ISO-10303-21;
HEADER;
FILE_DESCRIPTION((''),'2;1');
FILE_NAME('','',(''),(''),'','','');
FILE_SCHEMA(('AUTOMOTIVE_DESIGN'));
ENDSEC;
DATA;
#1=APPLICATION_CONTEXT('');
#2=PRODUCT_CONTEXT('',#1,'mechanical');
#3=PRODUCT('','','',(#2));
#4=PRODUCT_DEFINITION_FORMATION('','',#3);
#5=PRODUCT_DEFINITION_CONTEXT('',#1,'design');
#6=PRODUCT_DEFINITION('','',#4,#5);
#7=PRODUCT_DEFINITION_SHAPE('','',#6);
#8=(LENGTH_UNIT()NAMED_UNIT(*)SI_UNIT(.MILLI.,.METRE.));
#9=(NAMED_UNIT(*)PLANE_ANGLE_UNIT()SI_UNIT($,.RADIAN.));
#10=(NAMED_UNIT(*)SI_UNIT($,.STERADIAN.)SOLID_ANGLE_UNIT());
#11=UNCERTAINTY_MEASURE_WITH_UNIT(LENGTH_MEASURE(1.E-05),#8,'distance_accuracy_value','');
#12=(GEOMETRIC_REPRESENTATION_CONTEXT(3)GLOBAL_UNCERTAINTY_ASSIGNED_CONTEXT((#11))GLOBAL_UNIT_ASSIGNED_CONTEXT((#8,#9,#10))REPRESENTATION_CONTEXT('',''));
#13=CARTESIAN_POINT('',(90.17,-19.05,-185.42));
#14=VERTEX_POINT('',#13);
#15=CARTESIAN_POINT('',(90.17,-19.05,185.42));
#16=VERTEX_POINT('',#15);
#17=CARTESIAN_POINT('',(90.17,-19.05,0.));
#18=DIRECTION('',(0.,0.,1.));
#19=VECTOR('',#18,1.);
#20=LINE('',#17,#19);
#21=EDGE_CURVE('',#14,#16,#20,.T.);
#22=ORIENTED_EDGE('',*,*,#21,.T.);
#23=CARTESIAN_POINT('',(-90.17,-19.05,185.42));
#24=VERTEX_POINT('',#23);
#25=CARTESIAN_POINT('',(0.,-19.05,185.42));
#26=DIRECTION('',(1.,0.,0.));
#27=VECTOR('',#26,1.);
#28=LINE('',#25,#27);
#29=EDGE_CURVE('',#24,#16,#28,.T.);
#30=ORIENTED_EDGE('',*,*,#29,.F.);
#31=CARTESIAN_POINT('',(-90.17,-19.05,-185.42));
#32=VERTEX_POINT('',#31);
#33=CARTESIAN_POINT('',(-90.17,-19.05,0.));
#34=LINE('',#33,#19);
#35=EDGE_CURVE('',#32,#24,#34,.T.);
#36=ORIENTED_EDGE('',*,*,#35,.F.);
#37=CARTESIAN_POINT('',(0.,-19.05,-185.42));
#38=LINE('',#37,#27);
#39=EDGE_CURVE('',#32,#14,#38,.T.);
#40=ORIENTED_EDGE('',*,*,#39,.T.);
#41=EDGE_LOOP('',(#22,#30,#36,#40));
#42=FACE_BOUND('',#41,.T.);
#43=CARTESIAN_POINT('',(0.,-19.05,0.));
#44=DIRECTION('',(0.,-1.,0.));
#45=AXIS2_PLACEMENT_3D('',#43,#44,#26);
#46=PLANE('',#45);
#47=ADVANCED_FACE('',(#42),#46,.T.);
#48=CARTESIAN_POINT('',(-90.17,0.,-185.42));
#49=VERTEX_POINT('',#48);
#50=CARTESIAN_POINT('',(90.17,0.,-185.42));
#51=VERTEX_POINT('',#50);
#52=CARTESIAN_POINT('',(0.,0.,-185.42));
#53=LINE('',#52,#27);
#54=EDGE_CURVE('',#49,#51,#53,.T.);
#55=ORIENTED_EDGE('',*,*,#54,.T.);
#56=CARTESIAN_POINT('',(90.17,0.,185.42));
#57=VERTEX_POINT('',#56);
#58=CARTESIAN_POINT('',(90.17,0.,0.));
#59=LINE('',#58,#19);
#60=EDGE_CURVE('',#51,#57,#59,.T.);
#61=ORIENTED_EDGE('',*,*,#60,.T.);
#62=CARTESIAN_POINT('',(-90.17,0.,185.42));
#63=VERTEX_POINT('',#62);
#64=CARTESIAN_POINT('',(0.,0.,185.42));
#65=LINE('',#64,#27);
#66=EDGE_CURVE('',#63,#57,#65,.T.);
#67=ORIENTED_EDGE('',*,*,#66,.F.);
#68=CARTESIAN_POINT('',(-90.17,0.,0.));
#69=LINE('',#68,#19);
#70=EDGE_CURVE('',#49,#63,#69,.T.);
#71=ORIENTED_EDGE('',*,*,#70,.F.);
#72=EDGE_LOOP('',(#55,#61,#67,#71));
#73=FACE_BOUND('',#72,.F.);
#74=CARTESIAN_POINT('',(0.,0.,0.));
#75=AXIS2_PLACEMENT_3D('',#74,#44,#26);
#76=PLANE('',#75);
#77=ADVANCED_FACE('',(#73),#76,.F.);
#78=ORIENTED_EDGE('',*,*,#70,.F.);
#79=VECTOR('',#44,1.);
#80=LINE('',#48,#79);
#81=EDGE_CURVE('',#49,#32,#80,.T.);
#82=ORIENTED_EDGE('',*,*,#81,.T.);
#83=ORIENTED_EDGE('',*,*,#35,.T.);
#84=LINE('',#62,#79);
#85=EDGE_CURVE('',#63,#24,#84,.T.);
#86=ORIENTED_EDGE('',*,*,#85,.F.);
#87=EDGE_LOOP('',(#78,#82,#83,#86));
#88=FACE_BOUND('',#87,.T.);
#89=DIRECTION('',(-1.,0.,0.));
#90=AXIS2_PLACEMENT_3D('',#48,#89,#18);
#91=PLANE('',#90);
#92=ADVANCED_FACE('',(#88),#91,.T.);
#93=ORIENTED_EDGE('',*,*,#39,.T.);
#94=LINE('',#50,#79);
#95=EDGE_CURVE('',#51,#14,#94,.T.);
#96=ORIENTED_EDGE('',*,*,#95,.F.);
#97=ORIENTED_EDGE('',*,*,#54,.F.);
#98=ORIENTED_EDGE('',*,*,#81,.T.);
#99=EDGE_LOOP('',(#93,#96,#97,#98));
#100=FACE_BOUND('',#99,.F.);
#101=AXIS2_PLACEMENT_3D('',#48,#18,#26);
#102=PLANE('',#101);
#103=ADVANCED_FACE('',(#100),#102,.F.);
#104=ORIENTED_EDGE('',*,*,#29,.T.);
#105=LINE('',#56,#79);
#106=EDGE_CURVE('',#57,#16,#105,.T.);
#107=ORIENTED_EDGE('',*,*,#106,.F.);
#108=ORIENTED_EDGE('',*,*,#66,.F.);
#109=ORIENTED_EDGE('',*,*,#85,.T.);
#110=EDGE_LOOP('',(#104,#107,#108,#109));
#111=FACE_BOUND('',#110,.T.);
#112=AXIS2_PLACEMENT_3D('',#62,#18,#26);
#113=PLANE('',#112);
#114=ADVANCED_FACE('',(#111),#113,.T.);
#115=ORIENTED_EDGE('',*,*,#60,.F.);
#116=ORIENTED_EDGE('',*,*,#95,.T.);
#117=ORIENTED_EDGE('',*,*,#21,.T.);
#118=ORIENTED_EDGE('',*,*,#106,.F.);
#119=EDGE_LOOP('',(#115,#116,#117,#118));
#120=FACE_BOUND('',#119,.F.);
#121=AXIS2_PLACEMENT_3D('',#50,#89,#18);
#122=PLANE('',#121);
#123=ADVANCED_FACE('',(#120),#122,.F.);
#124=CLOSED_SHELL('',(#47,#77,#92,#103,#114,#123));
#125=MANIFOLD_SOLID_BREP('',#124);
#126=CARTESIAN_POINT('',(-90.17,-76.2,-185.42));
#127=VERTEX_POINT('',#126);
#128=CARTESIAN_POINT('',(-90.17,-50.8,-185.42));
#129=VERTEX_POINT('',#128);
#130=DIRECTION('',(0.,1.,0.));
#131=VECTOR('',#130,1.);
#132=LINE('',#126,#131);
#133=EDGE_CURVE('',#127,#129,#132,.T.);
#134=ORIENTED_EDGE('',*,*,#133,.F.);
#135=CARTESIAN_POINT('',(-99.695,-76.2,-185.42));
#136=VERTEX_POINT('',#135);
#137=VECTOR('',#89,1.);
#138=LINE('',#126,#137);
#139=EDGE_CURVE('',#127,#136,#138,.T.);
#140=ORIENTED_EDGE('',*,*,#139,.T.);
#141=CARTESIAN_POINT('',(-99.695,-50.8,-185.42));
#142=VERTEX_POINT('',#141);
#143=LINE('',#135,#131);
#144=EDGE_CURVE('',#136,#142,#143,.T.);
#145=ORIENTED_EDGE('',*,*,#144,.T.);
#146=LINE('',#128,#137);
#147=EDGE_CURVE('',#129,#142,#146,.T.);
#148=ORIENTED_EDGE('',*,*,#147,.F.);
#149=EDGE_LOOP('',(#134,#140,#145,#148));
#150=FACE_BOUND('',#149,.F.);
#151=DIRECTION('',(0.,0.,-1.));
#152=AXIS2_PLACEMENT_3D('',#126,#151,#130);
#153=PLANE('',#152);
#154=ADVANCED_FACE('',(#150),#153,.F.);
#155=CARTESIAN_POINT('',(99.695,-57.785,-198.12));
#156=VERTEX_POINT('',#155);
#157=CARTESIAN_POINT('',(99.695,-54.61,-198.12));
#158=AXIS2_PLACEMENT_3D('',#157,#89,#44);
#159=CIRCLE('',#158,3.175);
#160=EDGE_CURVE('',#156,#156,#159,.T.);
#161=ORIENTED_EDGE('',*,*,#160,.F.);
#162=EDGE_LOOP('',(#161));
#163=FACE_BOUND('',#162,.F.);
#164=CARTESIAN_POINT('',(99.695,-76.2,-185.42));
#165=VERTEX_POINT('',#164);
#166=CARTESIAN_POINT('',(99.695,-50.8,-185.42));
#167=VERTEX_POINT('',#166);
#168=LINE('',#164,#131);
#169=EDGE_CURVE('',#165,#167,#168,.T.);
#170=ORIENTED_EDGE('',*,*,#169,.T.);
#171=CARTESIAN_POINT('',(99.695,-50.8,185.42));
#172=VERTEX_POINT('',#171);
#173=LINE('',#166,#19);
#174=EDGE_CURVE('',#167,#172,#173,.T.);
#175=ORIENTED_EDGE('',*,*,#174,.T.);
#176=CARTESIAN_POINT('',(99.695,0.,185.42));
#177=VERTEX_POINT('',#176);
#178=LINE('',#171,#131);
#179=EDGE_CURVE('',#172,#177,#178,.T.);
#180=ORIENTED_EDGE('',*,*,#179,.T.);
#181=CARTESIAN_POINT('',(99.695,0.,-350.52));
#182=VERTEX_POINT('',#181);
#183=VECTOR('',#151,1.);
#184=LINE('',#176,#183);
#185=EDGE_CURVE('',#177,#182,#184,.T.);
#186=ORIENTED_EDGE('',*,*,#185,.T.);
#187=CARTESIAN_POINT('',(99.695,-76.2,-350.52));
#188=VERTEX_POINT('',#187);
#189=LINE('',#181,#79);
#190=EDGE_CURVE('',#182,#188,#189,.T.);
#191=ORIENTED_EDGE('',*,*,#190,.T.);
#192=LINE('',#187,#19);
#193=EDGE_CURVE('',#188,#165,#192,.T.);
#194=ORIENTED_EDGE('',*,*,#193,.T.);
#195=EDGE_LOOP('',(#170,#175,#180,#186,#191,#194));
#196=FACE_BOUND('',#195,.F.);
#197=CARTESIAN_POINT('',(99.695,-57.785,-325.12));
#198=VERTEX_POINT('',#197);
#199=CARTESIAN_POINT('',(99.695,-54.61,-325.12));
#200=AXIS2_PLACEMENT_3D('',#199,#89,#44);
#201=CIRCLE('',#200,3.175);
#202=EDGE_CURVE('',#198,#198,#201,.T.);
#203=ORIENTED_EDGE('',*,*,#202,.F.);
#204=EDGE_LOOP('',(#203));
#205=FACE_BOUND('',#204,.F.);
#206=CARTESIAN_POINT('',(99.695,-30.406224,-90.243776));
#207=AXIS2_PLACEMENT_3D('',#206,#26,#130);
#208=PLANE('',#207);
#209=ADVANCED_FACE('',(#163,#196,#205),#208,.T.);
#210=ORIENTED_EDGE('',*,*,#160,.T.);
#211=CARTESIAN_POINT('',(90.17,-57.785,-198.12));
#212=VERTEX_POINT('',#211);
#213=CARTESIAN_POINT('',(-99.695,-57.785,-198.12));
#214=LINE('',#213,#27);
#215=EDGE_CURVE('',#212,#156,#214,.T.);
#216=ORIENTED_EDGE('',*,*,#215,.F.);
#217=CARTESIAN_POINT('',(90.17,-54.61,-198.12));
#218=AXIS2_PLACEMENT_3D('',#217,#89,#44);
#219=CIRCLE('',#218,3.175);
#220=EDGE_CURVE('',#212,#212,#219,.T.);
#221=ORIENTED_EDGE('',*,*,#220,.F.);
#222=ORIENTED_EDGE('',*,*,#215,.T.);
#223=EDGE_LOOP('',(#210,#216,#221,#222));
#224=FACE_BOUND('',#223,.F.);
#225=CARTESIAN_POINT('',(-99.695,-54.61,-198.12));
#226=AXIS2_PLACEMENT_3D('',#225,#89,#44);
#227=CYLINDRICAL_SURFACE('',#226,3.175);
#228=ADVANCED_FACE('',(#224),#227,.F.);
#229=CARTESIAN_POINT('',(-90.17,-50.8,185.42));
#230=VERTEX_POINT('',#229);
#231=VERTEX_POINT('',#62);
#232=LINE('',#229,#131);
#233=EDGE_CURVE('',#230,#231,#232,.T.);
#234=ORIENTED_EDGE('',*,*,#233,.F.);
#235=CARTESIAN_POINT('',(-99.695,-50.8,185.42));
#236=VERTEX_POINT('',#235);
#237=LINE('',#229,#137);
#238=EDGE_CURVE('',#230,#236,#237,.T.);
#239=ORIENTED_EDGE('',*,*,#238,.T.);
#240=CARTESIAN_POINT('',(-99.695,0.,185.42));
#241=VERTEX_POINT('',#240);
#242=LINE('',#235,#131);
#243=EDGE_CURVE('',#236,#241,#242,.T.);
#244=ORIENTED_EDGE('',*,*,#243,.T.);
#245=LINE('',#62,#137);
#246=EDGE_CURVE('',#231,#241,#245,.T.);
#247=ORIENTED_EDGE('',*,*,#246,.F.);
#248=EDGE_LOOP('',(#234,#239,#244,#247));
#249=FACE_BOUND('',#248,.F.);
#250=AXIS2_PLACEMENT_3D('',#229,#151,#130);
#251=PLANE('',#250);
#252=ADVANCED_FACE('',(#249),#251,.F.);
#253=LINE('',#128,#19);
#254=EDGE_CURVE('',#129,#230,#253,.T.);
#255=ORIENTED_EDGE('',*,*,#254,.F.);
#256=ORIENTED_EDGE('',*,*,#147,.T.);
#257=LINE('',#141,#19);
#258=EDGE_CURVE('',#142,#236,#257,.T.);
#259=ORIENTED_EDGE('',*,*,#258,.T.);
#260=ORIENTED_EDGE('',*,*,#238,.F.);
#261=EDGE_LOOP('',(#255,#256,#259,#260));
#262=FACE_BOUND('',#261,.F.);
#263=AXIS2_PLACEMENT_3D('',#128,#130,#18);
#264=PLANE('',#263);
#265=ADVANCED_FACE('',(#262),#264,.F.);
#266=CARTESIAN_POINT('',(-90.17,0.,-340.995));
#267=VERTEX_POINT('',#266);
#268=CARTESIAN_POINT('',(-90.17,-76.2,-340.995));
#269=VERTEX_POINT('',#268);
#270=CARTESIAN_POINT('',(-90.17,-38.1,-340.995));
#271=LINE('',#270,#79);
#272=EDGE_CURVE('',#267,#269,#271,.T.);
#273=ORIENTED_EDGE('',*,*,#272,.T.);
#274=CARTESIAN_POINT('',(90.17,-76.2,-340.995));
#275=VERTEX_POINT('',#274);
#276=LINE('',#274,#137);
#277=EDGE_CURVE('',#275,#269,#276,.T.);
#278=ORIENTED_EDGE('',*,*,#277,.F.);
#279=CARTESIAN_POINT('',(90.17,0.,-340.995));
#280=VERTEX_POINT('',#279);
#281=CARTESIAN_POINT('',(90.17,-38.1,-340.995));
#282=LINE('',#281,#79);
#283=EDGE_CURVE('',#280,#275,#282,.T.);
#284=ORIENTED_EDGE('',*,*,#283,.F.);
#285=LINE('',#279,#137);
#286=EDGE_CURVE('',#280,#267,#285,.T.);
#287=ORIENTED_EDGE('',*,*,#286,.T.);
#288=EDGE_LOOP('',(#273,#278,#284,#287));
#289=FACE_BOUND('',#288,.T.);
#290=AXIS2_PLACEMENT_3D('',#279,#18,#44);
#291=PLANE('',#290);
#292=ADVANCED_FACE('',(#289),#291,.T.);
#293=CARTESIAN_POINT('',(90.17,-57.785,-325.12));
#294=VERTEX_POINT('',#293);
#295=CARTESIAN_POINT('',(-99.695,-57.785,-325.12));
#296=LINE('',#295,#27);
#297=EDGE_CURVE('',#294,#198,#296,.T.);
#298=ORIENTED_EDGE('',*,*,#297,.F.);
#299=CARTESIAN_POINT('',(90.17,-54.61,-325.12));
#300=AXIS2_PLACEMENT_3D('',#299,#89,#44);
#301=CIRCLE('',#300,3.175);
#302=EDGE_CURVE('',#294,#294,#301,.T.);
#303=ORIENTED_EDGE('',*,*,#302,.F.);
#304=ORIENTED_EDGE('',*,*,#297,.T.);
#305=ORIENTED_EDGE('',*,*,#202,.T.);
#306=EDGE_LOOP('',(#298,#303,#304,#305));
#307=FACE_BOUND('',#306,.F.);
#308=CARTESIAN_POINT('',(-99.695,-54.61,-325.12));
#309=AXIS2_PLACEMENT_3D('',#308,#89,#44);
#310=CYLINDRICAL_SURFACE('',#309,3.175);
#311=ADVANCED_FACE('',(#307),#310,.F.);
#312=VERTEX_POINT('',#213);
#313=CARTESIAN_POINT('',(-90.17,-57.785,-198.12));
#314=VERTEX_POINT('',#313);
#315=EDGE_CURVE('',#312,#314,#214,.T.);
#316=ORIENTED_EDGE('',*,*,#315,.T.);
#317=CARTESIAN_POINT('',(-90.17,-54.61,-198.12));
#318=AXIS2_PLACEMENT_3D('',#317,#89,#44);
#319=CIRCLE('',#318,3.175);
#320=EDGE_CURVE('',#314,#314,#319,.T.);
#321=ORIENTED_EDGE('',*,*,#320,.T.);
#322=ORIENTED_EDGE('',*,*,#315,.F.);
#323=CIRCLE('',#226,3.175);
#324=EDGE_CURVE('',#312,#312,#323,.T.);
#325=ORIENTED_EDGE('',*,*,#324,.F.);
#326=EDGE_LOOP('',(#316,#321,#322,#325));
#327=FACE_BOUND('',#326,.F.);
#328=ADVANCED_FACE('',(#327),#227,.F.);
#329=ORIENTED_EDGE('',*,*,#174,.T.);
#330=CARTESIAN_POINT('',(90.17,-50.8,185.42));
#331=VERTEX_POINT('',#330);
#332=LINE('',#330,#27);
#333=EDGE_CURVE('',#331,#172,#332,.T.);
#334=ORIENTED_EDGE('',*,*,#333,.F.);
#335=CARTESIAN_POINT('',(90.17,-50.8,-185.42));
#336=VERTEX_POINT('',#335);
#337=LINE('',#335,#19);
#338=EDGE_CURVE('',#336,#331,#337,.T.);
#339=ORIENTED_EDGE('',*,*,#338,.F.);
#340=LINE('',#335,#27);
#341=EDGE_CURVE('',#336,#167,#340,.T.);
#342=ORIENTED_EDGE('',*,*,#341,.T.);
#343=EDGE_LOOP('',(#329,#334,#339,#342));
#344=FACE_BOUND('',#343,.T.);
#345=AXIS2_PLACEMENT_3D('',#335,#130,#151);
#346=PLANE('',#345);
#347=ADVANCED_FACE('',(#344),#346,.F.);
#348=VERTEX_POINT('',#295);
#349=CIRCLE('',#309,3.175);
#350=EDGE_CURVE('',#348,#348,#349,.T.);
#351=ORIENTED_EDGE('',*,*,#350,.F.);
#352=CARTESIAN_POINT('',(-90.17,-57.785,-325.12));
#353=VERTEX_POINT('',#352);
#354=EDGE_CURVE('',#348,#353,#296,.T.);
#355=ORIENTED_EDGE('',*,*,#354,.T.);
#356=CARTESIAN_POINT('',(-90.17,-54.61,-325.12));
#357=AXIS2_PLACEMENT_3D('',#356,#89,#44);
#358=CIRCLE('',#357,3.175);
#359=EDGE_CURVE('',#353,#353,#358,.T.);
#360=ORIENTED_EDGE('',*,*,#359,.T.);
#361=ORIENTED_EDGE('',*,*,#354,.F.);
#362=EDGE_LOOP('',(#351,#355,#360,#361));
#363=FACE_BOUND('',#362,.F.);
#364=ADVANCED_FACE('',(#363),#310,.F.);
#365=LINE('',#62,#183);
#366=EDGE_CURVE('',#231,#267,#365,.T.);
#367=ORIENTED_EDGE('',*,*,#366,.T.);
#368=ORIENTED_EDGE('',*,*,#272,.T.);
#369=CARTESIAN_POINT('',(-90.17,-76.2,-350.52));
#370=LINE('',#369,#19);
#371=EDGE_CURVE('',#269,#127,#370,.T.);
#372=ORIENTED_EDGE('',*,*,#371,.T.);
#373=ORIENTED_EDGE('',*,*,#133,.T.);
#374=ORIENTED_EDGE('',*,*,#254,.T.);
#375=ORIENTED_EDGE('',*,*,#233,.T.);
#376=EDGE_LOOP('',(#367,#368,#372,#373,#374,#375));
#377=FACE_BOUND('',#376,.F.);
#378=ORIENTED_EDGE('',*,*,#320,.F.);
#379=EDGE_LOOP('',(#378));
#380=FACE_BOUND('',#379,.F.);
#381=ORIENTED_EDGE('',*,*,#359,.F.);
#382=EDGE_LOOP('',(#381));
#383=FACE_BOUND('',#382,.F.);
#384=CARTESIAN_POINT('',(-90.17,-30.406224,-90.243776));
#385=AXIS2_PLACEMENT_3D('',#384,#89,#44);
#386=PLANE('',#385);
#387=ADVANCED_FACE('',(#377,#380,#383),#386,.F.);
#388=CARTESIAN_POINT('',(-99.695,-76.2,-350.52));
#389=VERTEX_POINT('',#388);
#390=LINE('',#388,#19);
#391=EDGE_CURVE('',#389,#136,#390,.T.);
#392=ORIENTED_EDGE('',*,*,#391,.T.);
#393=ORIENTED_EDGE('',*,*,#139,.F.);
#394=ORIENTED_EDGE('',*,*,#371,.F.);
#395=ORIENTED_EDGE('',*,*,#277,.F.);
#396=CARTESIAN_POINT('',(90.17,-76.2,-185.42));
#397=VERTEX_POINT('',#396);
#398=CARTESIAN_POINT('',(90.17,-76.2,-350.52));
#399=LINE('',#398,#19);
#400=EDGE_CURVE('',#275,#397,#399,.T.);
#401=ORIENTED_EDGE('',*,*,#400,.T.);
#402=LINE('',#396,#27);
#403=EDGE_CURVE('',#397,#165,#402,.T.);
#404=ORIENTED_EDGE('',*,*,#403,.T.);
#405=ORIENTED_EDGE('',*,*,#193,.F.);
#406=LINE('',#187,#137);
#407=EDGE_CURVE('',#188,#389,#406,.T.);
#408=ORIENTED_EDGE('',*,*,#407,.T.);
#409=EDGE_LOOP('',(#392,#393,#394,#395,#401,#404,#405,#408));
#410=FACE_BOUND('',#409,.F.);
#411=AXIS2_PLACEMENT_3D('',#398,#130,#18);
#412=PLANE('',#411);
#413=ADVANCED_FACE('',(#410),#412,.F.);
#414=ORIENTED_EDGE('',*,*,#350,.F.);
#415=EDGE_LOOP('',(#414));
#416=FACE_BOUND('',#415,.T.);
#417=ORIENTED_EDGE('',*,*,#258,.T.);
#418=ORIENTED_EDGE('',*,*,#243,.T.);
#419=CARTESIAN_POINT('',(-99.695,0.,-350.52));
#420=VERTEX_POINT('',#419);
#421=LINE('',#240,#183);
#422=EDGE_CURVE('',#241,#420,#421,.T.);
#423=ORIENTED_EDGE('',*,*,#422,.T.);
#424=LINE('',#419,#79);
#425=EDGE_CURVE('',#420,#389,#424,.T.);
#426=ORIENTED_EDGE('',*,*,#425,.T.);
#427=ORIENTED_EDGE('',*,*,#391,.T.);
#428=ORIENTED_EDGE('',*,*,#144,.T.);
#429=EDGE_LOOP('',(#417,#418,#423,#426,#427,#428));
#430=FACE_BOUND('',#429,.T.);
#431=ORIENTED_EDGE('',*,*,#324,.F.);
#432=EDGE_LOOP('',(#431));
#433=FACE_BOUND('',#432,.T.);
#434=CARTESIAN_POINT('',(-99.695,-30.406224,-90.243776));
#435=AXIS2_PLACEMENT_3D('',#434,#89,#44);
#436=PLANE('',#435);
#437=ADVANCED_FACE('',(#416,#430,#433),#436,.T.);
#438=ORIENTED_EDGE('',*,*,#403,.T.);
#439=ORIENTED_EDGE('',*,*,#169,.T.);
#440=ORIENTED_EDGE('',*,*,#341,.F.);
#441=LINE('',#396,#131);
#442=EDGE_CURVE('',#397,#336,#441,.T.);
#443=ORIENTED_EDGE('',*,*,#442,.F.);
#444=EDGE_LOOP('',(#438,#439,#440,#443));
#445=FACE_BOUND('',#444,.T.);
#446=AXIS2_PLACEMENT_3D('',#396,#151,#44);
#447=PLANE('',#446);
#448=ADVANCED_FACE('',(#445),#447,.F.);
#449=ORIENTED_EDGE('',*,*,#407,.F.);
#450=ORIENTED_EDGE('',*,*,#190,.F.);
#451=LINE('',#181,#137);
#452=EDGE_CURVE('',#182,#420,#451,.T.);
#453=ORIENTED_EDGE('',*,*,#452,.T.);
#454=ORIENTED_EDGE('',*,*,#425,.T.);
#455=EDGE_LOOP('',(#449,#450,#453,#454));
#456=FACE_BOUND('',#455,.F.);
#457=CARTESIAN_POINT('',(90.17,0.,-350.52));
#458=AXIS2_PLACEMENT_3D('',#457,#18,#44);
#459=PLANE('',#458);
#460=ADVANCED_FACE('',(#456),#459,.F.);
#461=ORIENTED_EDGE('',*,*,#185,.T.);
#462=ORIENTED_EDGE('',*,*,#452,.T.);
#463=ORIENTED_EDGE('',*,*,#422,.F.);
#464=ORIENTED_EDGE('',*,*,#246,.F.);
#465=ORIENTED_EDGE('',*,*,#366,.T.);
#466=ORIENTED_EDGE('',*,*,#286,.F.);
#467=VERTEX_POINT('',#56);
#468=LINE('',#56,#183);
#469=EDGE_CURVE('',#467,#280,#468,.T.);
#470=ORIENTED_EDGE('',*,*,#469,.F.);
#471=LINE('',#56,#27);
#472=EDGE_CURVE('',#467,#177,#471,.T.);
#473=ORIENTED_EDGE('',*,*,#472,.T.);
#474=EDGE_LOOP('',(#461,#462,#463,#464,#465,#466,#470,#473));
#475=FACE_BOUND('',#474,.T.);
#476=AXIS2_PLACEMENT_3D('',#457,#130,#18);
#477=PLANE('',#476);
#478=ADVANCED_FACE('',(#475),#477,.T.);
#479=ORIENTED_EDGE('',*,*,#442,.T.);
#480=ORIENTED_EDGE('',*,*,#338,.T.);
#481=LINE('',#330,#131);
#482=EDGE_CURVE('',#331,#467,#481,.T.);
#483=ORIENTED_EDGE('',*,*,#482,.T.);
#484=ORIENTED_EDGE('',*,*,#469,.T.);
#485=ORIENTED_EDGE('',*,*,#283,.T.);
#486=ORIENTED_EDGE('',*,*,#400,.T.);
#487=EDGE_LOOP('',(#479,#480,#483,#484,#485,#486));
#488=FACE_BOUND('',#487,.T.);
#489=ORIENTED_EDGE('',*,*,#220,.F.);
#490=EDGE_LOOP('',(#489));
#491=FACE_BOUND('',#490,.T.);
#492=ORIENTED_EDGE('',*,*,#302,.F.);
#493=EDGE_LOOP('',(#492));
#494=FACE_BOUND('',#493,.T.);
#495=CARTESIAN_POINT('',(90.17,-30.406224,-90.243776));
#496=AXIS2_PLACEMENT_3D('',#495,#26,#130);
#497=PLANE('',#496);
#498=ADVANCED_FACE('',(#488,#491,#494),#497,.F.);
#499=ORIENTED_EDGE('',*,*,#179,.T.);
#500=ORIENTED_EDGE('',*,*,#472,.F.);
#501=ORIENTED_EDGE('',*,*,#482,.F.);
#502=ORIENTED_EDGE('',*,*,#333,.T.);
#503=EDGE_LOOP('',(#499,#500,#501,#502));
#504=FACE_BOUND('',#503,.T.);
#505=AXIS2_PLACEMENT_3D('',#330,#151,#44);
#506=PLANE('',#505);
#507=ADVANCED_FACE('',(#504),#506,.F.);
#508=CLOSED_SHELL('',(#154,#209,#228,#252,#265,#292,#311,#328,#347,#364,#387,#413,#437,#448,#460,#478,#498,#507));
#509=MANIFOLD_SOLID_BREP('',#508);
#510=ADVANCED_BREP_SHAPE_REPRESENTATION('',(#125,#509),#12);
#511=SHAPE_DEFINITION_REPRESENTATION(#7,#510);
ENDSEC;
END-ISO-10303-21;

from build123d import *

# Parameters (mm, degrees)
F0_W     = 180.34
F0_H     = 370.84
F1_DEPTH = 19.05
F4_DEPTH = 9.525
F6_W     = 76.2
F6_H     = 9.525
F7_DEPTH = 180.34
F8_R     = 3.175
F9_DEPTH = 199.391


with BuildPart() as f1:
    # F0 (on Front) → F1 (new body)
    with BuildSketch(Plane.XZ):
        Rectangle(F0_W, F0_H)
    extrude(amount=F1_DEPTH)


with BuildPart() as f4:
    # F3 (on face) → F4 (new body)
    with BuildSketch(Plane(origin=(-90.17, 0, 0), x_dir=(0, -1, 0), z_dir=(-1, 0, 0))):
        Polygon((50.8, 185.42), (0, 185.42), (0, -350.52), (50.8, -350.52), (76.2, -350.52), (76.2, -185.42), (50.8, -185.42), align=None)
    extrude(amount=F4_DEPTH)


with BuildPart() as f5_1:
    # F5: instance of F4
    add(f4.part.mirror(Plane.YZ))


with BuildPart() as f4_1:
    add(f4.part)

    add(f5_1.part)  # F7 merges F5_1
    # F6 (on face) → F7 (join, through all)
    with BuildSketch(Plane(origin=(90.17, 0, 0), x_dir=(0, -1, 0), z_dir=(-1, 0, 0))):
        with Locations((38.1, -345.7575)):
            Rectangle(F6_W, F6_H)
    extrude(amount=F7_DEPTH)

    # F8 (on face) → F9 (cut, through all)
    with BuildSketch(Plane(origin=(-99.695, 0, 0), x_dir=(0, -1, 0), z_dir=(-1, 0, 0))):
        with Locations((54.61, -198.12)):
            Circle(F8_R)
        with Locations((54.61, -325.12)):
            Circle(F8_R)
    extrude(amount=-F9_DEPTH, mode=Mode.SUBTRACT)


solid = Compound([f1.part, f4_1.part])
